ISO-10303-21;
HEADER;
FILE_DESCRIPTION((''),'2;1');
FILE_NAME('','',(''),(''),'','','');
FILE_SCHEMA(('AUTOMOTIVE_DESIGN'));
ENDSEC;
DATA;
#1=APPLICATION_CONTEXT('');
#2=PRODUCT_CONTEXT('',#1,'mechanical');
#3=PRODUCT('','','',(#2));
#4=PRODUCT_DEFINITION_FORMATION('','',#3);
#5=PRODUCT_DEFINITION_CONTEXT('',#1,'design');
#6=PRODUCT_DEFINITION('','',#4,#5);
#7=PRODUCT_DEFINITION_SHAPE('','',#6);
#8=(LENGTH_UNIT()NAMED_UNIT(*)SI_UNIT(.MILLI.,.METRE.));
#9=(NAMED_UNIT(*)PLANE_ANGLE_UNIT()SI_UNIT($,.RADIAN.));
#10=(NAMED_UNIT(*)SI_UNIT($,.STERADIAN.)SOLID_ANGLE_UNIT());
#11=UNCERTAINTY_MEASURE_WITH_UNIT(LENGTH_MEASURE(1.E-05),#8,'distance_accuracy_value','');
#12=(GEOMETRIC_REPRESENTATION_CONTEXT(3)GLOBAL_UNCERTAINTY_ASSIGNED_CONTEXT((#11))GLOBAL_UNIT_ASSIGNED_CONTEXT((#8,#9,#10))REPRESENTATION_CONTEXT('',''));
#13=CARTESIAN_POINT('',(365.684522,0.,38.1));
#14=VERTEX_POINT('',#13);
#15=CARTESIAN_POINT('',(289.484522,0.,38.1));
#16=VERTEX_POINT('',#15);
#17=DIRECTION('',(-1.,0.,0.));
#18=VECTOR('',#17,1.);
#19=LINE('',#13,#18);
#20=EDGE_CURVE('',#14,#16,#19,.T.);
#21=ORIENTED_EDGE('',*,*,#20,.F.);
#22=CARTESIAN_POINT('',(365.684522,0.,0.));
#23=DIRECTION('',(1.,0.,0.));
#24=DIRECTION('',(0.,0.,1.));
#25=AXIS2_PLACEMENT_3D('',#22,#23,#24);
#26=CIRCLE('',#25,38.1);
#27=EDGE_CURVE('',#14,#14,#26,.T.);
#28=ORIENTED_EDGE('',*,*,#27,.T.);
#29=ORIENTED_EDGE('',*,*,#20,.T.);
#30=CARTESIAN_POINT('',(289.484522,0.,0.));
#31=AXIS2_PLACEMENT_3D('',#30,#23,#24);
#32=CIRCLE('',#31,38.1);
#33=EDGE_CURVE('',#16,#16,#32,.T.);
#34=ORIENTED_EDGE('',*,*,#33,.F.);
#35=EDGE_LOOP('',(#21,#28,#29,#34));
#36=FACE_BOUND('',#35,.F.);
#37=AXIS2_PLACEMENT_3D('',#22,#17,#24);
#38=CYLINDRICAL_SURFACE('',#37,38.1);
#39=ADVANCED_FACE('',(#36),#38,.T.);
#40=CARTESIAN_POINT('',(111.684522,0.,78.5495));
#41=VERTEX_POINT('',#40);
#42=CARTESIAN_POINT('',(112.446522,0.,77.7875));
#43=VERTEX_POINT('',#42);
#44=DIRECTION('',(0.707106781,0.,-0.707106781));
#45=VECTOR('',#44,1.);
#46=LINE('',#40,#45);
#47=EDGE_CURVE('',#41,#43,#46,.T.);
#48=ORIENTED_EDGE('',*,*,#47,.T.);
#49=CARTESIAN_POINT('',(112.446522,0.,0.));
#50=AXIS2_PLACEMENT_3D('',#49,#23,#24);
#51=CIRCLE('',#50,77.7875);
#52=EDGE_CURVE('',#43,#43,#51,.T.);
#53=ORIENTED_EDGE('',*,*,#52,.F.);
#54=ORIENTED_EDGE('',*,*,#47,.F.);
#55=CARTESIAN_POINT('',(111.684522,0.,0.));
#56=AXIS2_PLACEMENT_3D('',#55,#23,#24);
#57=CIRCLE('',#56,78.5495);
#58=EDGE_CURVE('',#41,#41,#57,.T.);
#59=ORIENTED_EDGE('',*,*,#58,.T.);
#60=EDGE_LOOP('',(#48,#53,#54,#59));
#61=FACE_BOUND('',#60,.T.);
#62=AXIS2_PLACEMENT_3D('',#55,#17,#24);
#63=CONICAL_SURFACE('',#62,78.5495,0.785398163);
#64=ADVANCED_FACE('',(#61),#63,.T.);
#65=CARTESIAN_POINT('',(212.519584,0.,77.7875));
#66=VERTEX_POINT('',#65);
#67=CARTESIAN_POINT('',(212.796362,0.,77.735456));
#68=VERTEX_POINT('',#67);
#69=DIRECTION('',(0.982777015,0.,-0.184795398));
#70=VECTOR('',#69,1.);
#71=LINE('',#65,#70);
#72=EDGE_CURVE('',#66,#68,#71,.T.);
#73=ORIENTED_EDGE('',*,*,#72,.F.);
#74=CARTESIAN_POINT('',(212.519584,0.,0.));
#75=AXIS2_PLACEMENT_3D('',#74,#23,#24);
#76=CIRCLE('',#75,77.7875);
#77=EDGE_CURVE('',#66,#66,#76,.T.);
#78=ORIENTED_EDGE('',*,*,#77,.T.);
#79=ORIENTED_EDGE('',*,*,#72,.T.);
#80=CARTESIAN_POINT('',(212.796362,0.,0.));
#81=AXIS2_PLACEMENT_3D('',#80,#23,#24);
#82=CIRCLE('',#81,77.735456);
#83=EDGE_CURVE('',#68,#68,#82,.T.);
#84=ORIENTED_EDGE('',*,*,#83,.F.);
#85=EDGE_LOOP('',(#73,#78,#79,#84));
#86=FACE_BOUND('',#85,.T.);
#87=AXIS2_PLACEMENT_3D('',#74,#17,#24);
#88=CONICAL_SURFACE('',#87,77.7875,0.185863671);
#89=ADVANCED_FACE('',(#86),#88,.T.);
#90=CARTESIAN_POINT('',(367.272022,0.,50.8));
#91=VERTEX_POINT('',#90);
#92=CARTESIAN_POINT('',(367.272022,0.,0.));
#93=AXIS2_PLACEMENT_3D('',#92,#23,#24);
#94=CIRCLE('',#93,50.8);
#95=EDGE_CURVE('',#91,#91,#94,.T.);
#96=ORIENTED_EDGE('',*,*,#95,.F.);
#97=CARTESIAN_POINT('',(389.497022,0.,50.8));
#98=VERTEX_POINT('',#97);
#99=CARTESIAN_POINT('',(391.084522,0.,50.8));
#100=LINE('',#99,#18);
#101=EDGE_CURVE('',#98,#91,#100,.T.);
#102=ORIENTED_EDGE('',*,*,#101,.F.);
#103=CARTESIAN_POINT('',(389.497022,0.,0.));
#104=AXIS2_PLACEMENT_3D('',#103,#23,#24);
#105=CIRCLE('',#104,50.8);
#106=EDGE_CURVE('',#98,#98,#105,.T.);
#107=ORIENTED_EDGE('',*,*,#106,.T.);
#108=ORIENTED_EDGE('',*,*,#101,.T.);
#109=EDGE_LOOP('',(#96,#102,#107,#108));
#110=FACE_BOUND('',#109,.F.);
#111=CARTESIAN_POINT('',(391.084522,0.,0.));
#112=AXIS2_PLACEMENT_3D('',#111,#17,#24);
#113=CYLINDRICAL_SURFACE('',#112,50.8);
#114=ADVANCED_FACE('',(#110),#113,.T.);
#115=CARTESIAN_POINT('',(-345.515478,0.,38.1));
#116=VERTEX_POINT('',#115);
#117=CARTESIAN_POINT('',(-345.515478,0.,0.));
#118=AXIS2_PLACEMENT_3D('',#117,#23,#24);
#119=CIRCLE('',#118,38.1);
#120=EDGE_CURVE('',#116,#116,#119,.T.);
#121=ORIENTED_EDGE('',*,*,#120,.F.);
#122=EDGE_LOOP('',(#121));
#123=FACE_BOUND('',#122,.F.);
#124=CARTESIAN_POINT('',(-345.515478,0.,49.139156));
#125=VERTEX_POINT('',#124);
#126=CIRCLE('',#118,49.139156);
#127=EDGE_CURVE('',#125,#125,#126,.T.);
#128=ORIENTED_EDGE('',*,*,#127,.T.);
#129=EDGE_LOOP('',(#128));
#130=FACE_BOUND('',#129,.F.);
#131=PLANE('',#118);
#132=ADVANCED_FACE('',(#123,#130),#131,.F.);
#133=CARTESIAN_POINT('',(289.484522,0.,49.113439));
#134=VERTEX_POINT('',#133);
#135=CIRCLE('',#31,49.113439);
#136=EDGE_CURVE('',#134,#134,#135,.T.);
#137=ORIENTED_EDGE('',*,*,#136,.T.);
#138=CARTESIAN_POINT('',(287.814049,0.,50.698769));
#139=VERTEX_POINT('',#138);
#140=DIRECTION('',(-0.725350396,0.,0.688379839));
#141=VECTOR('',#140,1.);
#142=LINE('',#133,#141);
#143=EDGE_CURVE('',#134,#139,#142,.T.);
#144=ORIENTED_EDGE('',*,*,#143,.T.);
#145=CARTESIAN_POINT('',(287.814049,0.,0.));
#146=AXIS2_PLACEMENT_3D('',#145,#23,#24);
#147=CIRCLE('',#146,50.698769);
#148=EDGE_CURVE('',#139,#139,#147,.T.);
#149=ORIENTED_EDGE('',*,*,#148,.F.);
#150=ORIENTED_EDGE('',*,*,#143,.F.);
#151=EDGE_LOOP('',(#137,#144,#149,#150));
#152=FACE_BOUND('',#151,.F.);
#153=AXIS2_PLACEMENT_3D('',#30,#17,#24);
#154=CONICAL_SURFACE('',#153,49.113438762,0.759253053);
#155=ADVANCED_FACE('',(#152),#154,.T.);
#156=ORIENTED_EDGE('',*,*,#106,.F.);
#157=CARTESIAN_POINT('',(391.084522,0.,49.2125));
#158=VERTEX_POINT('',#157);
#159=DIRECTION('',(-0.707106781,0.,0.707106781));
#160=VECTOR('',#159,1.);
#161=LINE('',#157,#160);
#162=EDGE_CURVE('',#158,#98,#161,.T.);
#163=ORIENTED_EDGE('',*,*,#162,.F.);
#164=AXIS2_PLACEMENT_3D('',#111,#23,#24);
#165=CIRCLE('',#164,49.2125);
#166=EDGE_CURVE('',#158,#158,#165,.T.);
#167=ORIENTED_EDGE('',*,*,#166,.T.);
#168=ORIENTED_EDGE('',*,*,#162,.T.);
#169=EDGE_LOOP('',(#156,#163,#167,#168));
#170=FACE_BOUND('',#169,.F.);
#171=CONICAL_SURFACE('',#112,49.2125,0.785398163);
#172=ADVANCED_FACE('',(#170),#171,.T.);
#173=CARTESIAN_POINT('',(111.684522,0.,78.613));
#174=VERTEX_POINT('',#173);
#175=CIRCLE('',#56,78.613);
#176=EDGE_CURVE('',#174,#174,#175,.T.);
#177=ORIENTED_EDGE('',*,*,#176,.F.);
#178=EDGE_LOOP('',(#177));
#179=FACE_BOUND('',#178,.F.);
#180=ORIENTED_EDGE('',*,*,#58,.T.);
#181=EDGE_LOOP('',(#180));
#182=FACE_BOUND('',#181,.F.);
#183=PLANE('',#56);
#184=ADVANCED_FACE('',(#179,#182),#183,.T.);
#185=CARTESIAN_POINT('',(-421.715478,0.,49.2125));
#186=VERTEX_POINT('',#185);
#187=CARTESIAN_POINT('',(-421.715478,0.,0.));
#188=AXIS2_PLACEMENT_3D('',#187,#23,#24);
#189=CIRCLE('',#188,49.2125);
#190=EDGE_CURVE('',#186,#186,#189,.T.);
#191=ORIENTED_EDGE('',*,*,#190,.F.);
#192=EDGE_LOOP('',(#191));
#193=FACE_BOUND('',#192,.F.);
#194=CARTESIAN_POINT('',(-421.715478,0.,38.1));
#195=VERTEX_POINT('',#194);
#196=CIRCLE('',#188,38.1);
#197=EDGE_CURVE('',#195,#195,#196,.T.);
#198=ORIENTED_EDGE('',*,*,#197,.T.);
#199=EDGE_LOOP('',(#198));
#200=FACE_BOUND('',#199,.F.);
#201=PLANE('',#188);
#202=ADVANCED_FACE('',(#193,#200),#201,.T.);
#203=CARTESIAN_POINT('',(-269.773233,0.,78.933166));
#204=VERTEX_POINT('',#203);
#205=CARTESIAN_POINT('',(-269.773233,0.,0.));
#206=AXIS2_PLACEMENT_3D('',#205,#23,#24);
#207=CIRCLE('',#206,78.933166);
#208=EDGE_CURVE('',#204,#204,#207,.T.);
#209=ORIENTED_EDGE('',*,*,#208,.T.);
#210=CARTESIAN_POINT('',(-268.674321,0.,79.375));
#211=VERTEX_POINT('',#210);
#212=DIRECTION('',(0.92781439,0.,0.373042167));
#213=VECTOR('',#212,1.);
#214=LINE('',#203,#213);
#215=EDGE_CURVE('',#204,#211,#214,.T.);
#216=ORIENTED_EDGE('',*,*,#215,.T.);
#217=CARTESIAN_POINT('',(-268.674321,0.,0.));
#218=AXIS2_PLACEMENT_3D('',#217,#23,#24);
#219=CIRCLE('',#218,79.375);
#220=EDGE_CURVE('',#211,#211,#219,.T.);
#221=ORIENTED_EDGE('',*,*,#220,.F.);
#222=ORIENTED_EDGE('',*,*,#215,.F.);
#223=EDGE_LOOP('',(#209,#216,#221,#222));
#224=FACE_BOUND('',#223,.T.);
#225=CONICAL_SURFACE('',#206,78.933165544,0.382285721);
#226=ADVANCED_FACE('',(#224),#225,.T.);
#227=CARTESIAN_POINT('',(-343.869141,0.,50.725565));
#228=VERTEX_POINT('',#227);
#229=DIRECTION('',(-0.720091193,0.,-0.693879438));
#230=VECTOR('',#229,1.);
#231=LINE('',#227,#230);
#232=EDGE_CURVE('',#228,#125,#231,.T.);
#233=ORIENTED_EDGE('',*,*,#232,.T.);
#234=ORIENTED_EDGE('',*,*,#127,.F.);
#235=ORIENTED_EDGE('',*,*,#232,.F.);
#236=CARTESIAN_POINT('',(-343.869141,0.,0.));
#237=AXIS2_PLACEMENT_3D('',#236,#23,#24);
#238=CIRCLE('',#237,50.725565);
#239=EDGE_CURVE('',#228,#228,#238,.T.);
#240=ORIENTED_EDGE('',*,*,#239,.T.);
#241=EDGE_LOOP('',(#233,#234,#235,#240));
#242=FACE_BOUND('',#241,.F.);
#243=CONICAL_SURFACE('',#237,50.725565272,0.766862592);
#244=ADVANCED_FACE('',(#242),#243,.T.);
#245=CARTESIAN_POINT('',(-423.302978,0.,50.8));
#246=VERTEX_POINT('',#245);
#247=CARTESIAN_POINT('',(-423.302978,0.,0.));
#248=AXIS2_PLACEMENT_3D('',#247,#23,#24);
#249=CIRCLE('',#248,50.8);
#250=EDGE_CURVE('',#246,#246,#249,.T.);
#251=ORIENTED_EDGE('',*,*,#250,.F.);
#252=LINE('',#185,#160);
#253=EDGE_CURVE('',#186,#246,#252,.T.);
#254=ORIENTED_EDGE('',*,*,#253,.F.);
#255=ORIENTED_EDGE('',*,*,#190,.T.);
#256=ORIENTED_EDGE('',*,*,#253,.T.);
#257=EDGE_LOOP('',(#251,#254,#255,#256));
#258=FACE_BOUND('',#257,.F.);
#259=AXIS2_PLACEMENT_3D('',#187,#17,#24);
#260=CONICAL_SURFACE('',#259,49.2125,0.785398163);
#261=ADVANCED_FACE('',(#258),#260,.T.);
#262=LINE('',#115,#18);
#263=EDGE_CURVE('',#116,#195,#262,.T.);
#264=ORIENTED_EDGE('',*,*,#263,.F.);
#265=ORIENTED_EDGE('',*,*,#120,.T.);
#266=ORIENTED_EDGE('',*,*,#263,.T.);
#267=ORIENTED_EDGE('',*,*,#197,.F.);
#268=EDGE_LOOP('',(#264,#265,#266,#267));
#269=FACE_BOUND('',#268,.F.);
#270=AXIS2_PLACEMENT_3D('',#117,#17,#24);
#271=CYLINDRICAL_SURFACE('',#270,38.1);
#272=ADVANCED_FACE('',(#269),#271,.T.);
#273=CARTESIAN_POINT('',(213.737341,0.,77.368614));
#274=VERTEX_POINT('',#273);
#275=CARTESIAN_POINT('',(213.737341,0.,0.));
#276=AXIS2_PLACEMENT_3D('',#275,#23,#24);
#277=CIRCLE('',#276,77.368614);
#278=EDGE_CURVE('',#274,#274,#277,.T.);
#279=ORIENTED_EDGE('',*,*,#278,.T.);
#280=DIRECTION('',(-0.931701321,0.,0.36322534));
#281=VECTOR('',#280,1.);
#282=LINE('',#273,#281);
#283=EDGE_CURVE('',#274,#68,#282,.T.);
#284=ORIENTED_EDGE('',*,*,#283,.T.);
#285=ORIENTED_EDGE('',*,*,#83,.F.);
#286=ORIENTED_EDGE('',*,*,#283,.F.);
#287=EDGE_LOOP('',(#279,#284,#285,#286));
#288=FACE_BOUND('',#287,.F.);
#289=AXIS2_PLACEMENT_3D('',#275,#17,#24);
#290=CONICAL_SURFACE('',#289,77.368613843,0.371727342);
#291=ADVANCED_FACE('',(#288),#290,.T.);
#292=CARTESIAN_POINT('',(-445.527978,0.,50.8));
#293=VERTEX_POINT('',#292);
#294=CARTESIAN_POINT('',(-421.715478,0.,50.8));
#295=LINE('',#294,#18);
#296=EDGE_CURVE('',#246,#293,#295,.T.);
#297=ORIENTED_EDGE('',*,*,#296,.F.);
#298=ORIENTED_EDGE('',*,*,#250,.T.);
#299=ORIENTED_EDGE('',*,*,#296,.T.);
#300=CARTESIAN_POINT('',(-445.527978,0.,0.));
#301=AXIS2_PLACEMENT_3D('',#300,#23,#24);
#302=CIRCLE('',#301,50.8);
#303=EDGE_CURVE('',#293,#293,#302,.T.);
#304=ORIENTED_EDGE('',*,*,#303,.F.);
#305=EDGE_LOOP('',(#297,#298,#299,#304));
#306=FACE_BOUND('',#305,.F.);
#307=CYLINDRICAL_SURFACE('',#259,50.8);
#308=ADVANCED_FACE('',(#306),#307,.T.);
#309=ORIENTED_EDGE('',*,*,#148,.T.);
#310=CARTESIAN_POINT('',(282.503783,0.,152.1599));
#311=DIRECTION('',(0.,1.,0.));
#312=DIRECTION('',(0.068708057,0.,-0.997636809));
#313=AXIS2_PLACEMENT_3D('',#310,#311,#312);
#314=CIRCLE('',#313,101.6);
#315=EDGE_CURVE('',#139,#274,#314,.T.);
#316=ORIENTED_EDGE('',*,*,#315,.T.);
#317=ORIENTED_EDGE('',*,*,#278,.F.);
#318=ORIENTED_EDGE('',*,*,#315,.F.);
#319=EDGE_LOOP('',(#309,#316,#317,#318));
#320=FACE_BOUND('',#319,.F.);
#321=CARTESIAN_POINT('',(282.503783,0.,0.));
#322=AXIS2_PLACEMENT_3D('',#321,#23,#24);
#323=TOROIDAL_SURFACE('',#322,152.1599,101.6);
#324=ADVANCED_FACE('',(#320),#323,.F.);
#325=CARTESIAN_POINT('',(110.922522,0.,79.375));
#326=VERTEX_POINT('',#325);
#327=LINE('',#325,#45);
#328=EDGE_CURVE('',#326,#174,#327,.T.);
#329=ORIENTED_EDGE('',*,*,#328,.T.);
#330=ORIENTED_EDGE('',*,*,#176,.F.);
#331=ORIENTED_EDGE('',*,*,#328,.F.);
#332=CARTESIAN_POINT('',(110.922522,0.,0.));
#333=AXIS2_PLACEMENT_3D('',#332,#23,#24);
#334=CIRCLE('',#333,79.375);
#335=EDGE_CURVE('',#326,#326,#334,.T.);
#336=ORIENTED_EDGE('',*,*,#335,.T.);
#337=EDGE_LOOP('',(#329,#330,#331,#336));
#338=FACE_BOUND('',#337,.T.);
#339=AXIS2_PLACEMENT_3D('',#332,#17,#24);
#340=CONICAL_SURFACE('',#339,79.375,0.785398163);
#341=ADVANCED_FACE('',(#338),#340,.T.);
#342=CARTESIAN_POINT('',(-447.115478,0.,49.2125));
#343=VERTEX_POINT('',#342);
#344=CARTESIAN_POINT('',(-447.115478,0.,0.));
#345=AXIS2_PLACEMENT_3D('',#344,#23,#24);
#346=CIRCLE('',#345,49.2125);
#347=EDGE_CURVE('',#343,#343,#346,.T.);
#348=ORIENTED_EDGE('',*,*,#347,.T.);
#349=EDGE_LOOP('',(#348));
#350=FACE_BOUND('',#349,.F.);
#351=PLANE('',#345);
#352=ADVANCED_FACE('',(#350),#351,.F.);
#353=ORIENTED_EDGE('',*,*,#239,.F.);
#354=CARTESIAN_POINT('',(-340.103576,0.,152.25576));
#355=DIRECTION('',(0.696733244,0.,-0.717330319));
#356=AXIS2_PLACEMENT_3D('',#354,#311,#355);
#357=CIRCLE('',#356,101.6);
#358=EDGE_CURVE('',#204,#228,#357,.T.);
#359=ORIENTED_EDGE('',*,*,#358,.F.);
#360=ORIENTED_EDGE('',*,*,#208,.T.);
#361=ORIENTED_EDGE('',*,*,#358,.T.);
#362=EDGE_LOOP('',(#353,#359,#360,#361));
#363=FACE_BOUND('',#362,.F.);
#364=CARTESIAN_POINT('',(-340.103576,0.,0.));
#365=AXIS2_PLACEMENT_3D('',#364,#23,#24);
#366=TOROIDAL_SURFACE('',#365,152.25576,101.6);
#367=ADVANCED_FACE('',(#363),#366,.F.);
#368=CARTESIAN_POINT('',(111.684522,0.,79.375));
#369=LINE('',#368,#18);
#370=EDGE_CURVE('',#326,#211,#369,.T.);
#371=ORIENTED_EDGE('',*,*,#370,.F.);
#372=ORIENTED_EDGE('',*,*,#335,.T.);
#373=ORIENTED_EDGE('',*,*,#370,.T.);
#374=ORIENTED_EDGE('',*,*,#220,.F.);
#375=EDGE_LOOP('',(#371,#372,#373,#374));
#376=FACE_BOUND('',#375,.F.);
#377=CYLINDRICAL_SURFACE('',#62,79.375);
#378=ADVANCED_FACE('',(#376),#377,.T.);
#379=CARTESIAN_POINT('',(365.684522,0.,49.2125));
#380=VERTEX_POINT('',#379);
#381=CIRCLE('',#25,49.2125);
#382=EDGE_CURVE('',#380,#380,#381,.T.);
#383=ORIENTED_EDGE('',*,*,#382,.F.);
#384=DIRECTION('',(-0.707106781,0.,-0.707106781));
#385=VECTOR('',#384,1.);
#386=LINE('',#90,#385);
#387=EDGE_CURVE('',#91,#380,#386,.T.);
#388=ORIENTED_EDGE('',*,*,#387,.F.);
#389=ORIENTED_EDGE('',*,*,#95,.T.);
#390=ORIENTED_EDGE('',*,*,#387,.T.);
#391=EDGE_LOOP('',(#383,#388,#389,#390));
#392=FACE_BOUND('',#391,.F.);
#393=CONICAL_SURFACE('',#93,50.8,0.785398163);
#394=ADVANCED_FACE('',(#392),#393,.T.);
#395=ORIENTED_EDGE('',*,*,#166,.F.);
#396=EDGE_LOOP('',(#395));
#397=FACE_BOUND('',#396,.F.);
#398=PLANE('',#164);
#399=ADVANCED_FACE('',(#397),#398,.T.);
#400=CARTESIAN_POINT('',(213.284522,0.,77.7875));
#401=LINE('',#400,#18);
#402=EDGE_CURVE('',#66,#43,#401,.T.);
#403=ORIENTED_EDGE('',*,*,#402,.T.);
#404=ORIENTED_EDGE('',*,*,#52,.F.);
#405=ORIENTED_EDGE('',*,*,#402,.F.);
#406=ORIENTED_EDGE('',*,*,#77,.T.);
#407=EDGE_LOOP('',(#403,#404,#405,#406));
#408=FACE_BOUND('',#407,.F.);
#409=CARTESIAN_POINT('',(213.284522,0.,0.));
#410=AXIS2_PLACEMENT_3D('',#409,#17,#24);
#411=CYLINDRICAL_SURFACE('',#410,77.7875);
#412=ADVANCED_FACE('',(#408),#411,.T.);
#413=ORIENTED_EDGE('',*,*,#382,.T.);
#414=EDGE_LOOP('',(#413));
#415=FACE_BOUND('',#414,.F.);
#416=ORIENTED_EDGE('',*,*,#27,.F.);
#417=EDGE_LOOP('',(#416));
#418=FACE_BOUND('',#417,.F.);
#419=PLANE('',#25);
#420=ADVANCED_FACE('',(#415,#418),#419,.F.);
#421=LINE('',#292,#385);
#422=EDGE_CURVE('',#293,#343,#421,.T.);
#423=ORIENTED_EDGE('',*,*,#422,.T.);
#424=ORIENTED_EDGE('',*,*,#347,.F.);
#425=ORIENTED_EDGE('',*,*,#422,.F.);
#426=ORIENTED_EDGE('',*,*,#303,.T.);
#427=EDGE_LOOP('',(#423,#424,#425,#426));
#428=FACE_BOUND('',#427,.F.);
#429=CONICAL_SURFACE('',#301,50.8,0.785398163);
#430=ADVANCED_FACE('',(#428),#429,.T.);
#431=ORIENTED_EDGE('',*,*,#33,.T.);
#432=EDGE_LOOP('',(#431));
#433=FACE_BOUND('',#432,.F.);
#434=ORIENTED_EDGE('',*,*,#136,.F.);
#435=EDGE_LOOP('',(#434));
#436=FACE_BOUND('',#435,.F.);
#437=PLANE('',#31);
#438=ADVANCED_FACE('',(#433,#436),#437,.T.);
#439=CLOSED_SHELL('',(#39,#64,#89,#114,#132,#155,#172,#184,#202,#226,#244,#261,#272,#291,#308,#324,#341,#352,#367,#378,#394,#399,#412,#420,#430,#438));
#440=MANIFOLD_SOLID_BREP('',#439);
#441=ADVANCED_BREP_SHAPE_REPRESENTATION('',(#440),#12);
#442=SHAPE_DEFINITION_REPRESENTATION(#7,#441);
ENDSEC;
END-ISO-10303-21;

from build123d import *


# Not quite as in the source:
# - a fillet or chamfer that OpenCascade refuses, or shapes differently, is made with other operations: its cross-section is extruded or revolved along the edge and cut away or added


with BuildPart() as f1:
    # F0 (on Front) → F1 (revolve)
    with BuildSketch(Plane.XZ):
        with BuildLine():
            Line((-447.1154779911, 50.8), (-447.1154779911, 0))
            Line((-447.1154779911, 0), (391.0845220089, 0))
            Line((391.0845220089, 0), (391.0845220089, 50.8))
            Line((391.0845220089, 50.8), (365.6845220089, 50.8))
            Line((365.6845220089, 50.8), (365.6845220089, 38.1))
            Line((365.6845220089, 38.1), (289.4845220089, 38.1))
            Line((289.4845220089, 38.1), (289.4845220089, 50.8))
            ThreePointArc((289.4845220089, 50.8), (248.5849137461, 56.3889737285), (213.2845220089, 77.7875))
            Line((213.2845220089, 77.7875), (111.6845220089, 77.7875))
            Line((111.6845220089, 77.7875), (111.6845220089, 79.375))
            Line((111.6845220089, 79.375), (-269.3154779911, 79.375))
            ThreePointArc((-269.3154779911, 79.375), (-304.4294339656, 57.1247159319), (-345.5154779911, 50.8))
            Line((-345.5154779911, 50.8), (-345.5154779911, 38.1))
            Line((-345.5154779911, 38.1), (-421.7154779911, 38.1))
            Line((-421.7154779911, 38.1), (-421.7154779911, 50.8))
            Line((-421.7154779911, 50.8), (-447.1154779911, 50.8))
        make_face()
    revolve(axis=Axis((-28.0154779911, 0, 0), (1, 0, 0)))

    # F2: chamfer of 1.5875 on 8 edges, made by hand

    # F2_s1 → F2_t2 (revolve, cut)
    with BuildSketch(Plane.XZ):
        Polygon((-445.5279779911, 50.8), (-447.1154779911, 49.2125), (-447.1154779911, 50.8), align=None)
    revolve(axis=Axis((-447.1154779911, 0, 0), (1, 0, 0)), mode=Mode.SUBTRACT)

    # F2_s3 → F2_t4 (revolve, cut)
    with BuildSketch(Plane.XZ):
        Polygon((-421.7154779911, 49.2125), (-423.3029779911, 50.8), (-421.7154779911, 50.8), align=None)
    revolve(axis=Axis((-421.7154779911, 0, 0), (1, 0, 0)), mode=Mode.SUBTRACT)

    # F2_s5 → F2_t6 (revolve, cut)
    with BuildSketch(Plane.XZ):
        with BuildLine():
            Line((-343.8691410317, 50.7255652721), (-345.5154779911, 49.1391559736))
            Line((-345.5154779911, 49.1391559736), (-345.5154779911, 50.8))
            ThreePointArc((-345.5154779911, 50.8), (-344.6706324334, 50.7584599548), (-343.8691410317, 50.7255652721))
        make_face()
    revolve(axis=Axis((-345.5154779911, 0, 0), (1, 0, 0)), mode=Mode.SUBTRACT)

    # F2_s7 → F2_t8 (revolve, cut)
    with BuildSketch(Plane.XZ):
        Polygon((391.0845220089, 49.2125), (389.4970220089, 50.8), (391.0845220089, 50.8), align=None)
    revolve(axis=Axis((391.0845220089, 0, 0), (1, 0, 0)), mode=Mode.SUBTRACT)

    # F2_s9 → F2_t10 (revolve, cut)
    with BuildSketch(Plane.XZ):
        Polygon((367.2720220089, 50.8), (365.6845220089, 49.2125), (365.6845220089, 50.8), align=None)
    revolve(axis=Axis((365.6845220089, 0, 0), (1, 0, 0)), mode=Mode.SUBTRACT)

    # F2_s11 → F2_t12 (revolve, cut)
    with BuildSketch(Plane.XZ):
        with BuildLine():
            Line((289.4845220089, 49.1134387616), (287.8140491072, 50.6987689315))
            ThreePointArc((287.8140491072, 50.6987689315), (288.6278622062, 50.7446363641), (289.4845220089, 50.8))
            Line((289.4845220089, 50.8), (289.4845220089, 49.1134387616))
        make_face()
    revolve(axis=Axis((289.4845220089, 0, 0), (1, 0, 0)), mode=Mode.SUBTRACT)

    # F2_s13 → F2_t14 (revolve, cut)
    with BuildSketch(Plane.XZ):
        with BuildLine():
            Line((213.7373414064, 77.3686138432), (212.6628657503, 77.7875))
            Line((212.6628657503, 77.7875), (213.2845220089, 77.7875))
            ThreePointArc((213.2845220089, 77.7875), (213.5323086027, 77.5576500764), (213.7373414064, 77.3686138432))
        make_face()
    revolve(axis=Axis((213.2845220089, 0, 0), (1, 0, 0)), mode=Mode.SUBTRACT)

    # F2_s15 → F2_t16 (revolve, cut)
    with BuildSketch(Plane.XZ):
        with BuildLine():
            Line((-269.7732330498, 78.9331655442), (-268.6743214469, 79.375))
            Line((-268.6743214469, 79.375), (-269.3154779911, 79.375))
            ThreePointArc((-269.3154779911, 79.375), (-269.5651837952, 79.1332927093), (-269.7732330498, 78.9331655442))
        make_face()
    revolve(axis=Axis((-269.3154779911, 0, 0), (1, 0, 0)), mode=Mode.SUBTRACT)

    # F3: chamfer of 0.762 on 4 edges, made by hand

    # F3_s1 → F3_t2 (revolve)
    with BuildSketch(Plane.XZ):
        Polygon((111.6845220089, 78.5495), (112.4465220089, 77.7875), (111.6845220089, 77.7875), align=None)
    revolve(axis=Axis((111.6845220089, 0, 0), (1, 0, 0)))

    # F3_s3 → F3_t4 (revolve, cut)
    with BuildSketch(Plane.XZ):
        Polygon((110.9225220089, 79.375), (111.6845220089, 78.613), (111.6845220089, 79.375), align=None)
    revolve(axis=Axis((111.6845220089, 0, 0), (1, 0, 0)), mode=Mode.SUBTRACT)

    # F3_s5 → F3_t6 (revolve, cut)
    with BuildSketch(Plane.XZ):
        Polygon((212.5195839157, 77.7875), (212.7963616249, 77.7354564069), (212.6628657503, 77.7875), align=None)
    revolve(axis=Axis((212.6628657503, 0, 0), (1, 0, 0)), mode=Mode.SUBTRACT)


solid = f1.part
